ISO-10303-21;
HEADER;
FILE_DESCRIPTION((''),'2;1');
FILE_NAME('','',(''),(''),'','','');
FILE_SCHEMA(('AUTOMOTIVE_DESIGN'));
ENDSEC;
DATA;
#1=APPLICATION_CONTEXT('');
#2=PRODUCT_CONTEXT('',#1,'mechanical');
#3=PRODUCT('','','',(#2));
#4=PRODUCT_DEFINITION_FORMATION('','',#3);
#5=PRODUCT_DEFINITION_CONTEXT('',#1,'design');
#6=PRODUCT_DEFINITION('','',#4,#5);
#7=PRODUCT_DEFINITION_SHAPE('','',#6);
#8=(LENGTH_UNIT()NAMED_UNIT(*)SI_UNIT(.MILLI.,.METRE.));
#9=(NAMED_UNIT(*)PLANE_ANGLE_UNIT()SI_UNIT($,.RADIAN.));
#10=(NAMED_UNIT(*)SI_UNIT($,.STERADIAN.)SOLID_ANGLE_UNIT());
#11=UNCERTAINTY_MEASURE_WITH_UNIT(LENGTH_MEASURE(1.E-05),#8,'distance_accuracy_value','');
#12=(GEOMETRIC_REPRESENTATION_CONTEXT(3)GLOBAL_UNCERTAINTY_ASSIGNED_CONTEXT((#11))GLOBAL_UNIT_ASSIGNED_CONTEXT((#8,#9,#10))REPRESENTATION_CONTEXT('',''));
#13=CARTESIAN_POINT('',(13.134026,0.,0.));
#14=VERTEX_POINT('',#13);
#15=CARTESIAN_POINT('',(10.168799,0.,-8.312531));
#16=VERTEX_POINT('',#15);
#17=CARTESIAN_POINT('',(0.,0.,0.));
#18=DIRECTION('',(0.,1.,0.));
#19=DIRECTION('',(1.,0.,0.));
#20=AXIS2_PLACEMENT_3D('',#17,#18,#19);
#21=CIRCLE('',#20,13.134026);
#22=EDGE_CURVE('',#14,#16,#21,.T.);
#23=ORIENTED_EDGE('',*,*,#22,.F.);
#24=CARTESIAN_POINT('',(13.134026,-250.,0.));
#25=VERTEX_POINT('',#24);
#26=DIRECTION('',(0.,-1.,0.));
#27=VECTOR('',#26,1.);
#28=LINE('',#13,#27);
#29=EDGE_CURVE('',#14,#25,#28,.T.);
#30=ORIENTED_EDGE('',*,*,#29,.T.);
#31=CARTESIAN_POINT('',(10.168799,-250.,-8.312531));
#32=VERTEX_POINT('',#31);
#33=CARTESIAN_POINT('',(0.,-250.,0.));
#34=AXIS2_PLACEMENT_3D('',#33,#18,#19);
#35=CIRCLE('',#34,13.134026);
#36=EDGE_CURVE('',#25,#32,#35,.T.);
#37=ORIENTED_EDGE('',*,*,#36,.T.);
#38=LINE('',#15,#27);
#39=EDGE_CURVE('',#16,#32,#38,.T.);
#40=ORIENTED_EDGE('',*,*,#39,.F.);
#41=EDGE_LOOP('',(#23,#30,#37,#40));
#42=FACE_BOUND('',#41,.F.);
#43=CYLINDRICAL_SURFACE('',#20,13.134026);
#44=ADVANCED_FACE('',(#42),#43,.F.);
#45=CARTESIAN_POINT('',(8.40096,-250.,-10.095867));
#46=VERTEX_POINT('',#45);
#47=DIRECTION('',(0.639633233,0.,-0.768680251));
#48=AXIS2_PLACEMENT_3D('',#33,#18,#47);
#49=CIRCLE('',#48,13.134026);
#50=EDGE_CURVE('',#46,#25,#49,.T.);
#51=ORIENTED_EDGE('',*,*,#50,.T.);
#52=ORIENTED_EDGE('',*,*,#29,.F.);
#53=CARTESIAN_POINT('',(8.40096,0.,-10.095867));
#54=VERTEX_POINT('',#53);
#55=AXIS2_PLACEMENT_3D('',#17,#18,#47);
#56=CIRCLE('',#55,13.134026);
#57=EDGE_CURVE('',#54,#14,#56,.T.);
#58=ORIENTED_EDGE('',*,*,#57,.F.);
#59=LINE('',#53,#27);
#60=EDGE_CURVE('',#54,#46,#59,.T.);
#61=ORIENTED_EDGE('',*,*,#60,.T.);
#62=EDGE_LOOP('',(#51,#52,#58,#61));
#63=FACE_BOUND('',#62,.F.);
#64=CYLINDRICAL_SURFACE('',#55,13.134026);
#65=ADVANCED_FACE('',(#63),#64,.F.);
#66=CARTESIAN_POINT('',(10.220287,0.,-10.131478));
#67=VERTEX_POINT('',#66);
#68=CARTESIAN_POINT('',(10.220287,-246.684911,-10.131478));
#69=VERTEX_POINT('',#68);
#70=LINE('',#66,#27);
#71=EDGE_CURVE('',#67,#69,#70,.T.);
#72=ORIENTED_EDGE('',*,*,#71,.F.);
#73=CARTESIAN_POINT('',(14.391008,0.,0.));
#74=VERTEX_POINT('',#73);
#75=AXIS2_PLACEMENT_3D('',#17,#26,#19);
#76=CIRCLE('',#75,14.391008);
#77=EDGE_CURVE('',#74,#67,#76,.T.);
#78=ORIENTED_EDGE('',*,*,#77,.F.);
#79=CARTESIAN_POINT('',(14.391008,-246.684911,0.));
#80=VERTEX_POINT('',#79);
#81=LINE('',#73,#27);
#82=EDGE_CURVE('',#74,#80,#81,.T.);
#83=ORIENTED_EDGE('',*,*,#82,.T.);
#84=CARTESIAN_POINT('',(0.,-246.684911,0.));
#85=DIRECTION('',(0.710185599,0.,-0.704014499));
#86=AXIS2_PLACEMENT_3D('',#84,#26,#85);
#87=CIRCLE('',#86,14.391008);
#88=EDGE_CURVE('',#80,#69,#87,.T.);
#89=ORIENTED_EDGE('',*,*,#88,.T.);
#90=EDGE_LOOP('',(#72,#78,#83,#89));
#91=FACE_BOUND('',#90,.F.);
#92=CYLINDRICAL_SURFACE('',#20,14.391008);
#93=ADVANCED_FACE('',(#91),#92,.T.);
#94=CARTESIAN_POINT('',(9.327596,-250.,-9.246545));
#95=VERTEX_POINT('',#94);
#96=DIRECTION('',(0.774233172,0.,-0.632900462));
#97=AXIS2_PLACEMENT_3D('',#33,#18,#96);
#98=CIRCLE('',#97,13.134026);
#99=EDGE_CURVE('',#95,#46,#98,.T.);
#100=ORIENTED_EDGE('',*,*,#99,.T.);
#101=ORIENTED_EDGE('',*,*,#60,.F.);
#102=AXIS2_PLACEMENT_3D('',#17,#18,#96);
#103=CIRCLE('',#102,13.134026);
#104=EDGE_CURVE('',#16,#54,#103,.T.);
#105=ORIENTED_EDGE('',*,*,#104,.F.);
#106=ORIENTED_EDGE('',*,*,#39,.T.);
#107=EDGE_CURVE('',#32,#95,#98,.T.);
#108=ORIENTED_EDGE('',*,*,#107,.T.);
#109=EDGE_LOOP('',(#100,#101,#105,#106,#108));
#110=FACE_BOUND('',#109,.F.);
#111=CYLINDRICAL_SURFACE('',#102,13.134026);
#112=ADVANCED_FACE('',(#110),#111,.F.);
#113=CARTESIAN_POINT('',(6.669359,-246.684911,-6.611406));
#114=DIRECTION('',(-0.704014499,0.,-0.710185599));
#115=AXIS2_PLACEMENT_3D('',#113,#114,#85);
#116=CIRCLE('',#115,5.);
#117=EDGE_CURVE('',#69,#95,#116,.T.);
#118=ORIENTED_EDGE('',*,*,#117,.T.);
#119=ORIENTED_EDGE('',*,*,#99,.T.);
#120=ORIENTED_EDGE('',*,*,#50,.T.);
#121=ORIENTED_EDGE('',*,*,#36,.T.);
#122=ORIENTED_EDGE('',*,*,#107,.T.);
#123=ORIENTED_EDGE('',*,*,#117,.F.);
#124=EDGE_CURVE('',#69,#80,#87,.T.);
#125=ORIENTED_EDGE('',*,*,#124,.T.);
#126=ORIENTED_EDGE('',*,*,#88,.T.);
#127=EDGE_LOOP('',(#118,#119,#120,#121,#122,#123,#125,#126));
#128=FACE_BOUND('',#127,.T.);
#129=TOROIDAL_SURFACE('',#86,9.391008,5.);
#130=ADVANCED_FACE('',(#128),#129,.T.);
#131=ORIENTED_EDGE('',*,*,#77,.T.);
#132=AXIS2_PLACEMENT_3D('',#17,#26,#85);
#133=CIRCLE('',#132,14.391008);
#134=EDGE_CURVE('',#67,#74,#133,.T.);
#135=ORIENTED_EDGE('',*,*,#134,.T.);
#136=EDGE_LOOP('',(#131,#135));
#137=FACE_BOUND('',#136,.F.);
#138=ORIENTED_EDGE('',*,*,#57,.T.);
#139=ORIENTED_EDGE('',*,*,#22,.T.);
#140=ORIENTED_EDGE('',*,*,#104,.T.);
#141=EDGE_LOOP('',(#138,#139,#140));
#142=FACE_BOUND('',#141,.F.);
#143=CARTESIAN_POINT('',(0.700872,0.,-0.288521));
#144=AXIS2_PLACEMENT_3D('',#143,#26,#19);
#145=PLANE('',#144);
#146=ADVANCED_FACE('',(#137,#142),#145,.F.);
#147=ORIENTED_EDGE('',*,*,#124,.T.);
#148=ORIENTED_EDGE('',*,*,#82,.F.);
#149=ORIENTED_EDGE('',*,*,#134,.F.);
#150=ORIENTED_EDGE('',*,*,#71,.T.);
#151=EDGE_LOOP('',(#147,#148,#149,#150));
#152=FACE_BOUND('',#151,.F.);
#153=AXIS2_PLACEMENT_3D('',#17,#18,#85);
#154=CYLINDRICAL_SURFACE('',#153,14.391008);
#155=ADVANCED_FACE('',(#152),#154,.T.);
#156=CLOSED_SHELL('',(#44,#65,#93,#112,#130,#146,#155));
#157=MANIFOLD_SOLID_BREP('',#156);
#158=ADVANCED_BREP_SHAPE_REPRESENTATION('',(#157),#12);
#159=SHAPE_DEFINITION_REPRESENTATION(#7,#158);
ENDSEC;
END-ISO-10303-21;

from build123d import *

# Parameters (mm, degrees)
F1_DEPTH = 250


# Not quite as in the source:
# - a fillet or chamfer that OpenCascade refuses, or shapes differently, is made with other operations: its cross-section is extruded or revolved along the edge and cut away or added


with BuildPart() as f1:
    # F0 (on Front) → F1 (new body)
    with BuildSketch(Plane.XZ):
        with BuildLine():
            ThreePointArc((14.3910080635, 0), (-13.3075418668, 5.4781787619), (10.2202866776, -10.1314783379))
            ThreePointArc((10.2202866776, -10.1314783379), (13.3075418668, -5.4781787619), (14.3910080635, 0))
        make_face()
        with BuildLine():
            ThreePointArc((8.400959745, -10.0958666852), (-11.8920367391, 5.5751332681), (13.1340263728, 0))
            ThreePointArc((13.1340263728, 0), (12.3705279138, -4.4127868626), (10.168798903, -8.3125313612))
            ThreePointArc((10.168798903, -8.3125313612), (10.4759385173, -8.7353566894), (10.5845781271, -9.2465449483))
            ThreePointArc((10.5845781271, -9.2465449483), (10.4899428261, -9.7250361614), (10.2202866776, -10.1314783379))
            ThreePointArc((10.2202866776, -10.1314783379), (9.3029968872, -10.5032859052), (8.400959745, -10.0958666852))
        make_face(mode=Mode.SUBTRACT)
        with BuildLine():
            ThreePointArc((10.168798903, -8.3125313612), (9.3275964364, -9.2465449483), (8.400959745, -10.0958666852))
            ThreePointArc((8.400959745, -10.0958666852), (9.3029968872, -10.5032859052), (10.2202866776, -10.1314783379))
            ThreePointArc((10.2202866776, -10.1314783379), (10.4899428261, -9.7250361614), (10.5845781271, -9.2465449483))
            ThreePointArc((10.5845781271, -9.2465449483), (10.4759385173, -8.7353566894), (10.168798903, -8.3125313612))
        make_face()
    extrude(amount=F1_DEPTH)

    # F2: fillet of radius 5 on 1 edges, made by hand

    # F2_s1 → F2_t2 (revolve, cut)
    with BuildSketch(Plane(origin=(0, 0, 0), x_dir=(0, 1, 0), z_dir=(-0.7040144994, 0, -0.7101855987))):
        with BuildLine():
            ThreePointArc((-246.6849111722, 14.3910080635), (-248.4576080518, 14.0662134893), (-250, 13.1340263728))
            Line((-250, 13.1340263728), (-250, 14.3910080635))
            Line((-250, 14.3910080635), (-246.6849111722, 14.3910080635))
        make_face()
    revolve(axis=Axis((0, -250, 0), (0, -1, 0)), mode=Mode.SUBTRACT)


solid = f1.part
